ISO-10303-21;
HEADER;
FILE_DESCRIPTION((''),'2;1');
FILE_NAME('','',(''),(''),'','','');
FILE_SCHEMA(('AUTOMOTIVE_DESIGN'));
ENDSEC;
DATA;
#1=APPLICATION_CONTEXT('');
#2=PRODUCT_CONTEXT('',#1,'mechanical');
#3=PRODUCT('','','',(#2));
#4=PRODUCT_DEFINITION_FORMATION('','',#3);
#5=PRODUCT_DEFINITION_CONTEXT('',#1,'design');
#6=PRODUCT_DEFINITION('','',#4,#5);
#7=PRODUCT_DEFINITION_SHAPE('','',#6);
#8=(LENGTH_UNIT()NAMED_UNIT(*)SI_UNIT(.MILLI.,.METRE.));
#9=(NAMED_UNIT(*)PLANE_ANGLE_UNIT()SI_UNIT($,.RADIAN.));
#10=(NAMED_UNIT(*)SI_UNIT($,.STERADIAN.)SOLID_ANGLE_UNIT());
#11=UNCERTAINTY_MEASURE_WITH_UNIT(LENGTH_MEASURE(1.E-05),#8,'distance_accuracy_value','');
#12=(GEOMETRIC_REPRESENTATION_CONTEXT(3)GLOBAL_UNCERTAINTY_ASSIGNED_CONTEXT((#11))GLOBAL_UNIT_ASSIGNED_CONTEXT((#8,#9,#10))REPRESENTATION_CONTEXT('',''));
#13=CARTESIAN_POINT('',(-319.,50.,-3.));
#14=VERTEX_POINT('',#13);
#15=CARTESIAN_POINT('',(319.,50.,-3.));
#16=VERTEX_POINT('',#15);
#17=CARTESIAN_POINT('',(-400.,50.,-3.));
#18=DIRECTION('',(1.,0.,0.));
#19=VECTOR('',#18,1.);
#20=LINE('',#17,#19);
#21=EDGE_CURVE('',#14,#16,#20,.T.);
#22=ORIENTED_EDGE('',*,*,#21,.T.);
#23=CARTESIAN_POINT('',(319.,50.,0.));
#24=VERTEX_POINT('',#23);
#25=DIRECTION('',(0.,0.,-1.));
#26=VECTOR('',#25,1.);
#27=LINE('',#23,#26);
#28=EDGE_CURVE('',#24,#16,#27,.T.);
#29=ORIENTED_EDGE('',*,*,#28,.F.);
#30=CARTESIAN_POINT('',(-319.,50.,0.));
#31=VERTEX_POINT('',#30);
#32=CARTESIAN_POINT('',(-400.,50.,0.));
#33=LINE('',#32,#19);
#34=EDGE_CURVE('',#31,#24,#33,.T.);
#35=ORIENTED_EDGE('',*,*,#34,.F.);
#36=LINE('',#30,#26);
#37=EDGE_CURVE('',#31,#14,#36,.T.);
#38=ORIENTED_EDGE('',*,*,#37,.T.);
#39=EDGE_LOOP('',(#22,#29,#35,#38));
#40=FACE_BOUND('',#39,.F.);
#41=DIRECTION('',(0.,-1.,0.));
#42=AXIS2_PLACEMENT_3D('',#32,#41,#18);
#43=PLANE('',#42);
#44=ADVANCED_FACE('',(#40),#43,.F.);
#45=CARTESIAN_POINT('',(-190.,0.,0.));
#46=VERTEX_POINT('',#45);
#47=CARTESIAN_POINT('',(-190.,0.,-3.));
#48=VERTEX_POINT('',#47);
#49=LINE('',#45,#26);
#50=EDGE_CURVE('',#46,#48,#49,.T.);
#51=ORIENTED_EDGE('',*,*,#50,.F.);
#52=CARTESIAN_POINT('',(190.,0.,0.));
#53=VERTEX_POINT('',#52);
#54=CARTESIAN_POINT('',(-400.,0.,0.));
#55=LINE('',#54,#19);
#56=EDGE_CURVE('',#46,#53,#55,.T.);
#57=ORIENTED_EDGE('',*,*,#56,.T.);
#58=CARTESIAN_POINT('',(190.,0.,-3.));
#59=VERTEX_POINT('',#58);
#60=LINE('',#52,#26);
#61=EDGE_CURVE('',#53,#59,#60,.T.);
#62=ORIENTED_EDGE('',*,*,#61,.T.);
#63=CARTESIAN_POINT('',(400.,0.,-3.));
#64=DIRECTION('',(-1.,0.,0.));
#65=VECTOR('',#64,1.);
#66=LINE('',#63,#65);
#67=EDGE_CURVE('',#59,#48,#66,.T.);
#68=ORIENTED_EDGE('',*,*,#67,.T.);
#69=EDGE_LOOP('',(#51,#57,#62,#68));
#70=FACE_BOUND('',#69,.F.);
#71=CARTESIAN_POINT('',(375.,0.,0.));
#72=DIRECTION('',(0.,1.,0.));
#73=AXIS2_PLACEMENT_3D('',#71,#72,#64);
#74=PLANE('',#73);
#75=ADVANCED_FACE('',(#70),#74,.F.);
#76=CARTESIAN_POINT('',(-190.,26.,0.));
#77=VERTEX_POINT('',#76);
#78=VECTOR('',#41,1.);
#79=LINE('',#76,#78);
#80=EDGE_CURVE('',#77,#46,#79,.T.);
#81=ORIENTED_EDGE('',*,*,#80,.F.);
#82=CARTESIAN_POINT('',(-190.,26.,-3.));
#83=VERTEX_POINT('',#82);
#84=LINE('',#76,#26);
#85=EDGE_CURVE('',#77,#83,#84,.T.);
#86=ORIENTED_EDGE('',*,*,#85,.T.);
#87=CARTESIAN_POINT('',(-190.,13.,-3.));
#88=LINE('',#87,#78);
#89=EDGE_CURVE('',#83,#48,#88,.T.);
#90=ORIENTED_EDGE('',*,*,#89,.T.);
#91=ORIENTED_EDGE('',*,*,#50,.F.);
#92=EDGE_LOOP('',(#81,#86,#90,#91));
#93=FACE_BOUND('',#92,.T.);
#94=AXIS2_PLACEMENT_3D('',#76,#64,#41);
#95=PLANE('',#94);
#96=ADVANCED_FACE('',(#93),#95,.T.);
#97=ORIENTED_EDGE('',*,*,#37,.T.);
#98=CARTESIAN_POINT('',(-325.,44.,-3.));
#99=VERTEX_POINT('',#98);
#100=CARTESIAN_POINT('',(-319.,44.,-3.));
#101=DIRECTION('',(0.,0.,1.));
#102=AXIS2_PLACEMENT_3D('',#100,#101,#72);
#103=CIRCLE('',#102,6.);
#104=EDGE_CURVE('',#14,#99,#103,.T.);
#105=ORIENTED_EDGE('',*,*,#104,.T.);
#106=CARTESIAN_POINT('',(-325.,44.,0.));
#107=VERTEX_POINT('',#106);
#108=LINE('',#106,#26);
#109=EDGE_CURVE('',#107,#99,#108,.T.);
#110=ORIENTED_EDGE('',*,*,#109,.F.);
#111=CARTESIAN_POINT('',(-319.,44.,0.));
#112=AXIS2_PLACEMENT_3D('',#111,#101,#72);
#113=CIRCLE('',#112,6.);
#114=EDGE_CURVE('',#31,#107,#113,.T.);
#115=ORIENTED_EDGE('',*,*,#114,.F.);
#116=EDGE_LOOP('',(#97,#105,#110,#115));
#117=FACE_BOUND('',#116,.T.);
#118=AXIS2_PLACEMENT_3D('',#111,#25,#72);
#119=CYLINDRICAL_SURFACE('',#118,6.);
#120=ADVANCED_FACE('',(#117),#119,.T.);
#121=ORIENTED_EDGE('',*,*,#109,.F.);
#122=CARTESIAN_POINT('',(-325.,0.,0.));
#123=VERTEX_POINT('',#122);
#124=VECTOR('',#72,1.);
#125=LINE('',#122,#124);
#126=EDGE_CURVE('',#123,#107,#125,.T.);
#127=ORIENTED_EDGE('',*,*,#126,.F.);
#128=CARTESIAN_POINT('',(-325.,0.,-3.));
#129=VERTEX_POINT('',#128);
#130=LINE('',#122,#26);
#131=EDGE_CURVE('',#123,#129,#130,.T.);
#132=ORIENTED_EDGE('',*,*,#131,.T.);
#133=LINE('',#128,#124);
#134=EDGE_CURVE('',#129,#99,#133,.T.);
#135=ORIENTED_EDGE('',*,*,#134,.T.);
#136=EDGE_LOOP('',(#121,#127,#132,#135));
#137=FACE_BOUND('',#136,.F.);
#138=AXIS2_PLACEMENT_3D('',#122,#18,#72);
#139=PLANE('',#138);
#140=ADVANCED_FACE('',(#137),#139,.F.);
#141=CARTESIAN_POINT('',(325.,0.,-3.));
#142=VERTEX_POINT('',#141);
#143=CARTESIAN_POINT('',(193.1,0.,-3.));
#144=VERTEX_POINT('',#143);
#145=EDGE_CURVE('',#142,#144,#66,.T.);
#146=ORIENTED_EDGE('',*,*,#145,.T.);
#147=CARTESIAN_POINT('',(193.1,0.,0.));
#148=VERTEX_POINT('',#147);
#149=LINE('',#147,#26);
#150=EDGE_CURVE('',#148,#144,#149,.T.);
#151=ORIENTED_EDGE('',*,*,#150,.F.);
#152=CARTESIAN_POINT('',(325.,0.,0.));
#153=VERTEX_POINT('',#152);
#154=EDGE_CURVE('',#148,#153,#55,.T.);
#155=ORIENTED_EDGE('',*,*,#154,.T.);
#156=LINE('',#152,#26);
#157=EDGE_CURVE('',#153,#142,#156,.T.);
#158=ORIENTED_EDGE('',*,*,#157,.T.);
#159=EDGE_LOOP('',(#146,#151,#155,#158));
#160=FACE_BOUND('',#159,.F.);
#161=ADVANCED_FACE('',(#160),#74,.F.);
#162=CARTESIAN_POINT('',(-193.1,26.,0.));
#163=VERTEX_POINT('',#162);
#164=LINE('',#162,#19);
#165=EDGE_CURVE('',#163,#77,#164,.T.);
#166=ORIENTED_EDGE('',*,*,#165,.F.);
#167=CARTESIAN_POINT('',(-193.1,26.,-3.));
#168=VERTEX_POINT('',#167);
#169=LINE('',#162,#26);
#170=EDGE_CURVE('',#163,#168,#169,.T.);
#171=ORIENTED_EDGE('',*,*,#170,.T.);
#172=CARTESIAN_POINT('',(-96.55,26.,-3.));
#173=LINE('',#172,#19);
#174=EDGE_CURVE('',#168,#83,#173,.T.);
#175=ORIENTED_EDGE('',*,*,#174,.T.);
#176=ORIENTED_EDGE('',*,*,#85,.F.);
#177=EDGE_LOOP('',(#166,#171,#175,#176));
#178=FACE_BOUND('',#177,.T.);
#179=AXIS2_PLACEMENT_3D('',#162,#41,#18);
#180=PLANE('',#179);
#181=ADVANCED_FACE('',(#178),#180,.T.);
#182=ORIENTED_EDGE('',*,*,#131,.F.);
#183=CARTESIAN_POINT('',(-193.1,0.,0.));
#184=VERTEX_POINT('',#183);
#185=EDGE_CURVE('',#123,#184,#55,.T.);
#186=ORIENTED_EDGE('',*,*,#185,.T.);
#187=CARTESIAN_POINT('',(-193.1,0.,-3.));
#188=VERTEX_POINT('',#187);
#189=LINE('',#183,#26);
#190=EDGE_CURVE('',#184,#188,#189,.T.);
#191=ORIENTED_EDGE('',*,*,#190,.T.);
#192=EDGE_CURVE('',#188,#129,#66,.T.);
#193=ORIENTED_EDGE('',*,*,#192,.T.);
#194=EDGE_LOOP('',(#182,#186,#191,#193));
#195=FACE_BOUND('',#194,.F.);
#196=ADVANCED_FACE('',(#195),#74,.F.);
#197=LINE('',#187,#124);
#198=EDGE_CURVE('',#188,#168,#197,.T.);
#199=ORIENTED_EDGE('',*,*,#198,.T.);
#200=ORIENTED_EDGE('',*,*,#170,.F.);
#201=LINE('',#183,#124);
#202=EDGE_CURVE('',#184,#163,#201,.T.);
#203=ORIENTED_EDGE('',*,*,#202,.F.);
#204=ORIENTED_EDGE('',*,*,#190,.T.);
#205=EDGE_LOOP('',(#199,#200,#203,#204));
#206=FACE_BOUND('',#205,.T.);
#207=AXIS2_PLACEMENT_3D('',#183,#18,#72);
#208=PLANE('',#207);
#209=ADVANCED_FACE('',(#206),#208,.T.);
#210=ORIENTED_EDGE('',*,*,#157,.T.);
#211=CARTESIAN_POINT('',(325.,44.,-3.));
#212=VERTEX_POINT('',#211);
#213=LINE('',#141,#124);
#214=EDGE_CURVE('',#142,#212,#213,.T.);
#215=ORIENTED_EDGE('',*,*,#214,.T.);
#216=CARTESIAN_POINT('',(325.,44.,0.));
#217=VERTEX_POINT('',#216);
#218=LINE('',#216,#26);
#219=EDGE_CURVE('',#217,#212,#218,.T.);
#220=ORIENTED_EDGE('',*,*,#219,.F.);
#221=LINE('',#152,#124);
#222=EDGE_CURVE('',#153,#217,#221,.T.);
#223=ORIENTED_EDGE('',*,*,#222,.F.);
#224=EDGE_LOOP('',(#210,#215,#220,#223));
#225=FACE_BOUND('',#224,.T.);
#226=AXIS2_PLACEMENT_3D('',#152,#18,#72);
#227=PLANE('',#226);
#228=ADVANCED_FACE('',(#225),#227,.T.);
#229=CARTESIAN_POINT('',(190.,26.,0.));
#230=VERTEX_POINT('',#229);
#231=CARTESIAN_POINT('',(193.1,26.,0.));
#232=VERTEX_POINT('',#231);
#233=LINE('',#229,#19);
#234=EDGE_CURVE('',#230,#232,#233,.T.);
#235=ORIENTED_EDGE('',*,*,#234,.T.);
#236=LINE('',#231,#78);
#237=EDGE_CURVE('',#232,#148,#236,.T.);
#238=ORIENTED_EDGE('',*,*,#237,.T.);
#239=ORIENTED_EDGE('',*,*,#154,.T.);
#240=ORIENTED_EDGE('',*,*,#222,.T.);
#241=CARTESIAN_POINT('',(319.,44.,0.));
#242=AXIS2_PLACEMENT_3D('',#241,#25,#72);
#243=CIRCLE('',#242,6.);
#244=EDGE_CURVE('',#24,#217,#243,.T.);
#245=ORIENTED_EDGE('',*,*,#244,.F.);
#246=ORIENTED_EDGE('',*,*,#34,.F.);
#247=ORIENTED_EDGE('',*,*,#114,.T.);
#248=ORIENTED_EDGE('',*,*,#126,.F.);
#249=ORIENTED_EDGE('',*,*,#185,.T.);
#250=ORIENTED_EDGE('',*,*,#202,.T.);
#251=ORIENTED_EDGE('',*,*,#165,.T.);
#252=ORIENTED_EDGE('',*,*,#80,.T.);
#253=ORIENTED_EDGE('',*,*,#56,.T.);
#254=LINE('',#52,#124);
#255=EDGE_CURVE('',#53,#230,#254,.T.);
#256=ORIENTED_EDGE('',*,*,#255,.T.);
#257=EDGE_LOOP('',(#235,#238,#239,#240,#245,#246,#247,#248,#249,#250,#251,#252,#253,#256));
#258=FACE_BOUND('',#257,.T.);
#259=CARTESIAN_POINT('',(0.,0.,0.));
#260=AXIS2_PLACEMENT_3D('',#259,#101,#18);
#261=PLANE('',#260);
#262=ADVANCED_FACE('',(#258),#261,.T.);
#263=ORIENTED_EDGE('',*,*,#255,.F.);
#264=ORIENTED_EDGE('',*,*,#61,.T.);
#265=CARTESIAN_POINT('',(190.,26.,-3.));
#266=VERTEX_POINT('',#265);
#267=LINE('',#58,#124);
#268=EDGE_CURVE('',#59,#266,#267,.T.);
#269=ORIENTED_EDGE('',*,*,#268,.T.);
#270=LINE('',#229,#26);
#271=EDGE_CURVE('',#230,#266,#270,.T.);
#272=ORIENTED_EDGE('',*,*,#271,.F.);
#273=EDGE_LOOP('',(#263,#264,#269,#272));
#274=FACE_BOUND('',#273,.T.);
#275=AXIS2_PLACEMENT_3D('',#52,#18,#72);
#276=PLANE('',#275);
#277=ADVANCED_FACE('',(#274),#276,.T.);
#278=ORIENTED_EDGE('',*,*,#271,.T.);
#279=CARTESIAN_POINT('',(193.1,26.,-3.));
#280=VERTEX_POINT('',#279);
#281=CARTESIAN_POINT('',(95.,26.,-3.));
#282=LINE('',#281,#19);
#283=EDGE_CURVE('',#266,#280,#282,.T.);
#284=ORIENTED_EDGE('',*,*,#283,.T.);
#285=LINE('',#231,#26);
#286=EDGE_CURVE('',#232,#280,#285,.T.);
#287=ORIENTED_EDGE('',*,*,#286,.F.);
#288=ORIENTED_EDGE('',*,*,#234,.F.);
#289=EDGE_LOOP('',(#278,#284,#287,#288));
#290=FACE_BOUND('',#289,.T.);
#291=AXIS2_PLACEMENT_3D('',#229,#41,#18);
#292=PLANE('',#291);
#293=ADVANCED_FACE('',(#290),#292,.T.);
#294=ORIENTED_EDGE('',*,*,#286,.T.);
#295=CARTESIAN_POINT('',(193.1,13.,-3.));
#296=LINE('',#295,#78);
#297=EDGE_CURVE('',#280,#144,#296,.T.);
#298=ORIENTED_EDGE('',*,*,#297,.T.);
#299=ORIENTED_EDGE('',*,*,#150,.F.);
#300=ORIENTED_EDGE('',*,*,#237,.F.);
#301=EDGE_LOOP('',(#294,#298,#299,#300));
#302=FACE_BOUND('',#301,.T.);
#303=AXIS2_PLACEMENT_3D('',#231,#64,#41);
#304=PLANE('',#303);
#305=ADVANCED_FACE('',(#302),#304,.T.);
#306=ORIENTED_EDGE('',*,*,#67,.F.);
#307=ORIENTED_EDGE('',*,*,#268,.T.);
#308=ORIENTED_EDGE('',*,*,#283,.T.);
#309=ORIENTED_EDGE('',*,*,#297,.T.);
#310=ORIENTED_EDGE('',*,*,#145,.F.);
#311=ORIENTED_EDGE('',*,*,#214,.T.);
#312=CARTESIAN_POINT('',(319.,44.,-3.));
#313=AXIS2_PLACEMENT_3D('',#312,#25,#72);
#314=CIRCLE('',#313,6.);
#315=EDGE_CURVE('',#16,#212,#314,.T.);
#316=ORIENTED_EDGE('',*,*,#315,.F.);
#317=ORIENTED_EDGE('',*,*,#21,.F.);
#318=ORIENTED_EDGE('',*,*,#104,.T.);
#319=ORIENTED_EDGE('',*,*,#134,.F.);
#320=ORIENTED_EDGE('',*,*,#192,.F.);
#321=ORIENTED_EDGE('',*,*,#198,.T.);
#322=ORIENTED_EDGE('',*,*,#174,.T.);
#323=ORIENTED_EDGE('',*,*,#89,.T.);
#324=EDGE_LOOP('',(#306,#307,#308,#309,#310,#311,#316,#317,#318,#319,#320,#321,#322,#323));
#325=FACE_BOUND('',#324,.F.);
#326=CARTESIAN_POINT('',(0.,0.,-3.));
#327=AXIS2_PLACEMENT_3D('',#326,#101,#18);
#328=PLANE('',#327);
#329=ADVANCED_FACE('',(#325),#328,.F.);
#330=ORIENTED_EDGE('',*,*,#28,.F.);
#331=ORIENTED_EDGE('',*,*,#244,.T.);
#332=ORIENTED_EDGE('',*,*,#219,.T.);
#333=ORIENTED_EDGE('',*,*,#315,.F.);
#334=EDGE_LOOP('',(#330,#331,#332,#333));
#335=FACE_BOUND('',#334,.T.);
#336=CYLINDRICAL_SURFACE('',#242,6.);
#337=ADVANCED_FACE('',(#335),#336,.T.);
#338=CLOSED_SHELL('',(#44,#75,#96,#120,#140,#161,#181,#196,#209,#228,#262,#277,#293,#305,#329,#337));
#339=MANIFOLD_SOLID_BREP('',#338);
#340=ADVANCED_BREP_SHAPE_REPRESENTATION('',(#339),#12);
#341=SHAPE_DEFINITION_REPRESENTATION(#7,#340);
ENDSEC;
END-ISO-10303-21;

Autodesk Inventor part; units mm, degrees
ref_plane "YZ Plane" through (0, 0, 0) normal (1, 0, 0) x (0, 1, 0)
ref_plane "XZ Plane" through (0, 0, 0) normal (0, 1, 0) x (-1, 0, 0)
ref_plane "XY Plane" through (0, 0, 0) normal (0, 0, 1) x (1, 0, 0)
sketch "Sketch1" plane through (0, 0, 0) normal (0, 0, 1) x (1, 0, 0)
  line L0 (-400, 50) -> (400, 50)
  line L1 (400, 50) -> (400, 0)
  line L2 (400, 0) -> (-400, 0)
  line L3 (-400, 0) -> (-400, 50)
  circle A0 centre (-400, 0) radius 25
  circle A1 centre (400, 0) radius 25
  point P0 (0, 0)
  point P1 (0, 0)
  point P2 (-400, 25)
  point P3 (-375, 0)
  point P4 (375, 0)
  point P5 (400, 25)
  dimension "d16" = 50
  dimension "d17" = 800
  dimension "d18" = 50
  dimension "d19" = 50
extrude "Plate2" add sketch "Sketch1" against normal blind 3 contours L0 L1 A1 L2 A0 L3 | A0 L2 L3 | L1 L2 A1 picked at (-388.289, 11.711) picked at (398.1457, 16.4577)
sketch "Sketch2" plane through (0, 0, 0) normal (0, 0, 1) x (1, 0, 0)
  line L0 (400, 50) -> (-400, 50) projected
  line L1 (191.55, 50) -> (191.55, 0) construction
  line L2 (-400, 0) -> (400, 0) projected
  line L3 (190, 26) -> (193.1, 26)
  line L4 (193.1, 26) -> (193.1, 0)
  line L5 (193.1, 0) -> (190, 0)
  line L6 (190, 0) -> (190, 26)
  line L7 (-191.55, 0) -> (-191.55, 50) construction
  line L8 (-193.1, 26) -> (-190, 26)
  line L9 (-190, 26) -> (-190, 0)
  line L10 (-190, 0) -> (-193.1, 0)
  line L11 (-193.1, 0) -> (-193.1, 26)
  line L12 (0, 0) -> (0, 50)
  point P0 (0, 0)
  point P1 (190, 0)
  point P2 (193.1, 0)
  point P3 (-193.1, 0)
  point P4 (-190, 0)
  dimension "d27" = 26
  dimension "d28" = 3.1
  dimension "d34" = 380
extrude "Extrusion1" cut sketch "Sketch2" against normal blind 10
sketch "Sketch3" plane through (0, 0, 0) normal (0, 0, 1) x (1, 0, 0)
  line L0 (190, 0) -> (190, 26) projected
  line L1 (190, 26) -> (193.1, 26) projected
  line L2 (193.1, 26) -> (193.1, 0) projected
  line L3 (193.1, 0) -> (400, 0) projected
  line L4 (400, 0) -> (400, 50) projected
  line L5 (400, 50) -> (-400, 50) projected
  line L6 (-400, 50) -> (-400, 0) projected
  line L7 (-400, 0) -> (-193.1, 0) projected
  line L8 (-193.1, 0) -> (-193.1, 26) projected
  line L9 (-193.1, 26) -> (-190, 26) projected
  line L10 (-190, 26) -> (-190, 0) projected
  line L11 (-190, 0) -> (190, 0) projected
  line L12 (325, 0) -> (325, 50)
  line L13 (400, 50) -> (-400, 50) projected
  line L14 (-325, 0) -> (-325, 50)
  point P0 (0, 0)
  point P1 (325, 50)
  dimension "d29" = 75
  dimension "d30" = 75
extrude "Extrusion2" cut sketch "Sketch3" against normal through all contours L12 L5 L4 L3 | L7 L6 L5 L14
sketch "Sketch4" plane through (0, 0, -3) normal (0, 0, -1) x (-1, 0, 0)
  line L0 (-62.455, 14.7345) -> (-62.455, 33.3208) construction
  line L1 (-62.455, 33.3208) -> (59.5733, 33.3208) construction
  line L2 (59.5733, 33.3208) -> (59.5733, 14.7345) construction
  line L3 (59.5733, 14.7345) -> (-62.455, 14.7345) construction
  point P0 (0, 0)
mark "Mark1"
fillet "Corner Round1" radius 6 2 edges at (325, 50, -1.5) (-325, 50, -1.5)
equation "\"d27\" = d23"
equation "\"d30\" = d29"
equation "\"d20\" = Thickness"
equation "\"BendReliefWidth\" = Thickness"
equation "\"BendReliefDepth\" = 0.5 * Thickness"
equation "\"CornerReliefSize\" = 4 * Thickness"
equation "\"MinimumRemnant\" = 2 * Thickness"
equation "\"TransitionRadius\" = BendRadius"
equation "\"JacobiRadiusSize\" = BendRadius"
equation "\"GapSize\" = Thickness"
equation "\"d23\" = 26"
equation "\"Thickness\" = 3"
equation "\"BendRadius\" = 5"
properties part number "MSC 109 RIB CONE" material "Stainless Steel"
